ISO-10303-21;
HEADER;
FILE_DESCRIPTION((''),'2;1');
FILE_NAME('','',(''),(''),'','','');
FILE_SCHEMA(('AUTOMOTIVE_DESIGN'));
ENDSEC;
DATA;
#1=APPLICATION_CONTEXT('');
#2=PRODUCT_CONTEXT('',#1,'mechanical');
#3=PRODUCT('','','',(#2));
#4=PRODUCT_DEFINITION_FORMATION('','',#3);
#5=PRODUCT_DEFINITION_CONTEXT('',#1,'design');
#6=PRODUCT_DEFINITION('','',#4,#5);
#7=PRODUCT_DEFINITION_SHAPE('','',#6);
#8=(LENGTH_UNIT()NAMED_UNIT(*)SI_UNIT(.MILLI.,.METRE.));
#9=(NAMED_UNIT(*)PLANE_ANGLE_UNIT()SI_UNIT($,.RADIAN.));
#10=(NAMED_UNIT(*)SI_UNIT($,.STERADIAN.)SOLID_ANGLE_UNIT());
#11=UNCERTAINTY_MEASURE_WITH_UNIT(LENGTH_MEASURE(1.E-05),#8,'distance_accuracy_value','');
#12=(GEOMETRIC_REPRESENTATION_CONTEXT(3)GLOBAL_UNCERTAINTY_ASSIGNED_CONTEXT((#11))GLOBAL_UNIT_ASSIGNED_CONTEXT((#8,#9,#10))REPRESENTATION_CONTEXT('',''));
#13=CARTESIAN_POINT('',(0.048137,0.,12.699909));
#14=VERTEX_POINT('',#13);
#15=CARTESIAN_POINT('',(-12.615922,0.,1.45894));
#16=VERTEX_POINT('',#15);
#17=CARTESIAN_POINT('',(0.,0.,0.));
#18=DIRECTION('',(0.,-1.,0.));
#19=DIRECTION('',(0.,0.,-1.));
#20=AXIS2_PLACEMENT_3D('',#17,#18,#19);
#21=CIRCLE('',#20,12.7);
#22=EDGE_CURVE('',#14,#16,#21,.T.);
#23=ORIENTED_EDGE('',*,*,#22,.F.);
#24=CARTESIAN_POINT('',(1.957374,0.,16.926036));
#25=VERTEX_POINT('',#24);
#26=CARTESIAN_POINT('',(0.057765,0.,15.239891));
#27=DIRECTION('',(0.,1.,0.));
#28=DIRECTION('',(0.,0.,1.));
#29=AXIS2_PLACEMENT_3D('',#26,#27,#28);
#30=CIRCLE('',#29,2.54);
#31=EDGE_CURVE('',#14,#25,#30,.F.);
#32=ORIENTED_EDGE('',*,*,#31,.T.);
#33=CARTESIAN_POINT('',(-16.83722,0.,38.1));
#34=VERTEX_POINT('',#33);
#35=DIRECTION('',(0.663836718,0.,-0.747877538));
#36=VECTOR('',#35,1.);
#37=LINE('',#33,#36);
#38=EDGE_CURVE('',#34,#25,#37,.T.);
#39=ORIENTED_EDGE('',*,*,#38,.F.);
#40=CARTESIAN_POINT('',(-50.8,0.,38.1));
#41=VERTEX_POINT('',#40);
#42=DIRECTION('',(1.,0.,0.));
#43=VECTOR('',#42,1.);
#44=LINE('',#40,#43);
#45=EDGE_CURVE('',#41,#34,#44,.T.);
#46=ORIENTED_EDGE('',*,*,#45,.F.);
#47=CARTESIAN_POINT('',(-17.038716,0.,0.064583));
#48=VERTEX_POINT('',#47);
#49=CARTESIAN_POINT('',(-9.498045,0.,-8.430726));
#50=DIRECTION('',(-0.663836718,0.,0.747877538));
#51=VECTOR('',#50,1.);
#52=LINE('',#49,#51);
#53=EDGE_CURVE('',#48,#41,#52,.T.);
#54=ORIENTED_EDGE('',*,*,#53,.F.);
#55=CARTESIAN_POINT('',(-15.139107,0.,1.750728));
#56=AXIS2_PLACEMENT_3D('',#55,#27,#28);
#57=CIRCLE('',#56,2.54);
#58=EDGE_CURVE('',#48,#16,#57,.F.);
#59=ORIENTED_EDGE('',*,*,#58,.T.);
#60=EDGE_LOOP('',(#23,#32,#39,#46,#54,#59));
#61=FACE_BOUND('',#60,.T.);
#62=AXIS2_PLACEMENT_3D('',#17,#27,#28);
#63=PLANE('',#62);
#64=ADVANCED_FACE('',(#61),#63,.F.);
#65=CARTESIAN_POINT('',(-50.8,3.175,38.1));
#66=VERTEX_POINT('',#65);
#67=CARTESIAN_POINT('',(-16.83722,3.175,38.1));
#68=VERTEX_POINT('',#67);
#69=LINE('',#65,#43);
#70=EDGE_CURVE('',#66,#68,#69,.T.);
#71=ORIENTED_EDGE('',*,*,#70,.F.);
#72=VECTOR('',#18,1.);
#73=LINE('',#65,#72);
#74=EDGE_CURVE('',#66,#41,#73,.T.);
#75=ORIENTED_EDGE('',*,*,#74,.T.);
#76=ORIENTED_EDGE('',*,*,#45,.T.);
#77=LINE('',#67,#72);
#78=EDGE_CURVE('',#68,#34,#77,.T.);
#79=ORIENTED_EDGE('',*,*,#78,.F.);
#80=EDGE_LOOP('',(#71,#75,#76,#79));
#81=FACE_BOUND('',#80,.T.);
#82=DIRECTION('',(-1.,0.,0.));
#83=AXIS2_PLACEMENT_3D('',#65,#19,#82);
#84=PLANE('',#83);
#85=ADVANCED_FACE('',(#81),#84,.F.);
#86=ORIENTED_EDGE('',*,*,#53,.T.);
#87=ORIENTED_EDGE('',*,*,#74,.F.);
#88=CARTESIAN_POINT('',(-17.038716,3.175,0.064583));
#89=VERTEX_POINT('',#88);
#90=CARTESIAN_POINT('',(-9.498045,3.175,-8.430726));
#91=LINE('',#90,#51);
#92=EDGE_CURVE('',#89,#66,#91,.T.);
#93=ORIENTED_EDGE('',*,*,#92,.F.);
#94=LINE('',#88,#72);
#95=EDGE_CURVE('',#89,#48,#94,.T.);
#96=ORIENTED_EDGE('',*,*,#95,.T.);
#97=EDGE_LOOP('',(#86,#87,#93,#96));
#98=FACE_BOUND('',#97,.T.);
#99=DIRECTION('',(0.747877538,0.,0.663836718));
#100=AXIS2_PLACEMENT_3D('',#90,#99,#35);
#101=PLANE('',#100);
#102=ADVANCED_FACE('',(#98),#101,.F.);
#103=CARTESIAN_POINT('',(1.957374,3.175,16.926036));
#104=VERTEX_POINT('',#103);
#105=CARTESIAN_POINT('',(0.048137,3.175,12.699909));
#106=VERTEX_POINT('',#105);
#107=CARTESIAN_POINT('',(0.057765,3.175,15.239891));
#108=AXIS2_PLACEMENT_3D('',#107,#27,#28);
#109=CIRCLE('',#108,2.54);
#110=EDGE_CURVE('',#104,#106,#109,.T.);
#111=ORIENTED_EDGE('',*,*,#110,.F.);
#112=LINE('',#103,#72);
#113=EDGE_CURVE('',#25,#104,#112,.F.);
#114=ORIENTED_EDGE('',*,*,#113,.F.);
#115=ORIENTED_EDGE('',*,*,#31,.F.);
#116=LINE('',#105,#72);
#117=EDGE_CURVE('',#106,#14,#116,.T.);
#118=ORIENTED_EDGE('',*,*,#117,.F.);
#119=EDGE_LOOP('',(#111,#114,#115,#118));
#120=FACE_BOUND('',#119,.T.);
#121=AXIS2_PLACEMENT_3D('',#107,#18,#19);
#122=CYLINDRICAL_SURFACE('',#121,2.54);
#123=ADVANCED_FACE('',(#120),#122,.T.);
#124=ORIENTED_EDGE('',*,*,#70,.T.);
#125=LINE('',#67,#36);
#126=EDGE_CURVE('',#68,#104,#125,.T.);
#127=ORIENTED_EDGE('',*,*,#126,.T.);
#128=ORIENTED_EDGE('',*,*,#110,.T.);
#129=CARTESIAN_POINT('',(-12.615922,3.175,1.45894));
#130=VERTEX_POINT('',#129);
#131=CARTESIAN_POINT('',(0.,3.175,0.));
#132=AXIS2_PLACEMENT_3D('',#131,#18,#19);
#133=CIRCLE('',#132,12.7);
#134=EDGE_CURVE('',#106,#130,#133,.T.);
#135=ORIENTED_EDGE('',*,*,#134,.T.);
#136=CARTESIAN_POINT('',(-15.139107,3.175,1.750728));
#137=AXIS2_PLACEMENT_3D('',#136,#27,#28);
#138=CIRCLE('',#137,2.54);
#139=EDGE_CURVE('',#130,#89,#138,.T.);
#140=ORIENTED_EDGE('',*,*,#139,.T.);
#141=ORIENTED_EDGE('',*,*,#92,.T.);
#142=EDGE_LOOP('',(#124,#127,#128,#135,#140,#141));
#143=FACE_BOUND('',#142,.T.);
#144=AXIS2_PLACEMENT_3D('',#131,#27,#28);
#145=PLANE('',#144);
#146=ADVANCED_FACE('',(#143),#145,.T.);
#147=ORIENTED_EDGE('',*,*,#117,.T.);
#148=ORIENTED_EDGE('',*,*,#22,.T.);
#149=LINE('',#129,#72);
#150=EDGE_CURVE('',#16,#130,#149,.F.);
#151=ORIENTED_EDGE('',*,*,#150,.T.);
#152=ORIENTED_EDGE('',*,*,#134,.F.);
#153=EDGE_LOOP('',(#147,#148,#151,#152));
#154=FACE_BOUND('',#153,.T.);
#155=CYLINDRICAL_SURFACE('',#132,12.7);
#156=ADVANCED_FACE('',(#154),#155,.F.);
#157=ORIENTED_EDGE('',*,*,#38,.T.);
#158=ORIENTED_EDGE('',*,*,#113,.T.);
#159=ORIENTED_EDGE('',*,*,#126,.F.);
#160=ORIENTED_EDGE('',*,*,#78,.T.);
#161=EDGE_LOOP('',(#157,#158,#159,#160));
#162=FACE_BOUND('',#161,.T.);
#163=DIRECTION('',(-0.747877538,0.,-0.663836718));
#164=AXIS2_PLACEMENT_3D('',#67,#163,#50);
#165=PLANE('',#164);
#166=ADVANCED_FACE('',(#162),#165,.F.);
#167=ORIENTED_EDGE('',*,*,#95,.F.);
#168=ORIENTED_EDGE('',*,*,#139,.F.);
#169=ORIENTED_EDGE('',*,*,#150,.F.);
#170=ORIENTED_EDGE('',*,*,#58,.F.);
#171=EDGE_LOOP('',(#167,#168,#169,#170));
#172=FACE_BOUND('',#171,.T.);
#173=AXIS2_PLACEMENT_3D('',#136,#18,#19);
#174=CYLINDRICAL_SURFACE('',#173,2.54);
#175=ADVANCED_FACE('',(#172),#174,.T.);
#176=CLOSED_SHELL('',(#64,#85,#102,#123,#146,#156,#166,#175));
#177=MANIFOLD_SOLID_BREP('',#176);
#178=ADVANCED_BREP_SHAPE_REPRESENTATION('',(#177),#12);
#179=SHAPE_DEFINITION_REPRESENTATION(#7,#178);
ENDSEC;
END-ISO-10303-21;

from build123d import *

# Parameters (mm, degrees)
BOSS_EXTRUDE1_DEPTH = 3.175
SKETCH2_R           = 12.7
CUT_EXTRUDE1_DEPTH  = 64.579325453
FILLET1_R           = 2.54


with BuildPart() as part:
    # Sketch1 → Boss-Extrude1 (new body)
    with BuildSketch(Plane(origin=(0, 0, 0), x_dir=(1, 0, 0), z_dir=(0, 1, 0))):
        with BuildLine():
            Line((-9.498044736, 8.430726315), (-50.8, -38.1))
            Line((-50.8, -38.1), (-16.8372204, -38.1))
            Line((-16.8372204, -38.1), (9.498044736, -8.430726315))
            ThreePointArc((9.498044736, -8.430726315), (8.430726315, 9.498044736), (-9.498044736, 8.430726315))
        make_face()
    extrude(amount=BOSS_EXTRUDE1_DEPTH)

    # Sketch2 → Cut-Extrude1 (cut, through all)
    with BuildSketch(Plane.XZ):
        Circle(SKETCH2_R)
    extrude(amount=-CUT_EXTRUDE1_DEPTH, mode=Mode.SUBTRACT)

    # Fillet1
    fillet1_edges = [part.edges().sort_by_distance(p)[0] for p in [
        (9.498044736, 1.5875, 8.430726315),
    ]]
    fillet(fillet1_edges, radius=FILLET1_R)
    fillet1_2_edges = [part.edges().sort_by_distance(p)[0] for p in [
        (-9.498044736, 1.5875, -8.430726315),
    ]]
    fillet(fillet1_2_edges, radius=FILLET1_R)


solid = part.part
